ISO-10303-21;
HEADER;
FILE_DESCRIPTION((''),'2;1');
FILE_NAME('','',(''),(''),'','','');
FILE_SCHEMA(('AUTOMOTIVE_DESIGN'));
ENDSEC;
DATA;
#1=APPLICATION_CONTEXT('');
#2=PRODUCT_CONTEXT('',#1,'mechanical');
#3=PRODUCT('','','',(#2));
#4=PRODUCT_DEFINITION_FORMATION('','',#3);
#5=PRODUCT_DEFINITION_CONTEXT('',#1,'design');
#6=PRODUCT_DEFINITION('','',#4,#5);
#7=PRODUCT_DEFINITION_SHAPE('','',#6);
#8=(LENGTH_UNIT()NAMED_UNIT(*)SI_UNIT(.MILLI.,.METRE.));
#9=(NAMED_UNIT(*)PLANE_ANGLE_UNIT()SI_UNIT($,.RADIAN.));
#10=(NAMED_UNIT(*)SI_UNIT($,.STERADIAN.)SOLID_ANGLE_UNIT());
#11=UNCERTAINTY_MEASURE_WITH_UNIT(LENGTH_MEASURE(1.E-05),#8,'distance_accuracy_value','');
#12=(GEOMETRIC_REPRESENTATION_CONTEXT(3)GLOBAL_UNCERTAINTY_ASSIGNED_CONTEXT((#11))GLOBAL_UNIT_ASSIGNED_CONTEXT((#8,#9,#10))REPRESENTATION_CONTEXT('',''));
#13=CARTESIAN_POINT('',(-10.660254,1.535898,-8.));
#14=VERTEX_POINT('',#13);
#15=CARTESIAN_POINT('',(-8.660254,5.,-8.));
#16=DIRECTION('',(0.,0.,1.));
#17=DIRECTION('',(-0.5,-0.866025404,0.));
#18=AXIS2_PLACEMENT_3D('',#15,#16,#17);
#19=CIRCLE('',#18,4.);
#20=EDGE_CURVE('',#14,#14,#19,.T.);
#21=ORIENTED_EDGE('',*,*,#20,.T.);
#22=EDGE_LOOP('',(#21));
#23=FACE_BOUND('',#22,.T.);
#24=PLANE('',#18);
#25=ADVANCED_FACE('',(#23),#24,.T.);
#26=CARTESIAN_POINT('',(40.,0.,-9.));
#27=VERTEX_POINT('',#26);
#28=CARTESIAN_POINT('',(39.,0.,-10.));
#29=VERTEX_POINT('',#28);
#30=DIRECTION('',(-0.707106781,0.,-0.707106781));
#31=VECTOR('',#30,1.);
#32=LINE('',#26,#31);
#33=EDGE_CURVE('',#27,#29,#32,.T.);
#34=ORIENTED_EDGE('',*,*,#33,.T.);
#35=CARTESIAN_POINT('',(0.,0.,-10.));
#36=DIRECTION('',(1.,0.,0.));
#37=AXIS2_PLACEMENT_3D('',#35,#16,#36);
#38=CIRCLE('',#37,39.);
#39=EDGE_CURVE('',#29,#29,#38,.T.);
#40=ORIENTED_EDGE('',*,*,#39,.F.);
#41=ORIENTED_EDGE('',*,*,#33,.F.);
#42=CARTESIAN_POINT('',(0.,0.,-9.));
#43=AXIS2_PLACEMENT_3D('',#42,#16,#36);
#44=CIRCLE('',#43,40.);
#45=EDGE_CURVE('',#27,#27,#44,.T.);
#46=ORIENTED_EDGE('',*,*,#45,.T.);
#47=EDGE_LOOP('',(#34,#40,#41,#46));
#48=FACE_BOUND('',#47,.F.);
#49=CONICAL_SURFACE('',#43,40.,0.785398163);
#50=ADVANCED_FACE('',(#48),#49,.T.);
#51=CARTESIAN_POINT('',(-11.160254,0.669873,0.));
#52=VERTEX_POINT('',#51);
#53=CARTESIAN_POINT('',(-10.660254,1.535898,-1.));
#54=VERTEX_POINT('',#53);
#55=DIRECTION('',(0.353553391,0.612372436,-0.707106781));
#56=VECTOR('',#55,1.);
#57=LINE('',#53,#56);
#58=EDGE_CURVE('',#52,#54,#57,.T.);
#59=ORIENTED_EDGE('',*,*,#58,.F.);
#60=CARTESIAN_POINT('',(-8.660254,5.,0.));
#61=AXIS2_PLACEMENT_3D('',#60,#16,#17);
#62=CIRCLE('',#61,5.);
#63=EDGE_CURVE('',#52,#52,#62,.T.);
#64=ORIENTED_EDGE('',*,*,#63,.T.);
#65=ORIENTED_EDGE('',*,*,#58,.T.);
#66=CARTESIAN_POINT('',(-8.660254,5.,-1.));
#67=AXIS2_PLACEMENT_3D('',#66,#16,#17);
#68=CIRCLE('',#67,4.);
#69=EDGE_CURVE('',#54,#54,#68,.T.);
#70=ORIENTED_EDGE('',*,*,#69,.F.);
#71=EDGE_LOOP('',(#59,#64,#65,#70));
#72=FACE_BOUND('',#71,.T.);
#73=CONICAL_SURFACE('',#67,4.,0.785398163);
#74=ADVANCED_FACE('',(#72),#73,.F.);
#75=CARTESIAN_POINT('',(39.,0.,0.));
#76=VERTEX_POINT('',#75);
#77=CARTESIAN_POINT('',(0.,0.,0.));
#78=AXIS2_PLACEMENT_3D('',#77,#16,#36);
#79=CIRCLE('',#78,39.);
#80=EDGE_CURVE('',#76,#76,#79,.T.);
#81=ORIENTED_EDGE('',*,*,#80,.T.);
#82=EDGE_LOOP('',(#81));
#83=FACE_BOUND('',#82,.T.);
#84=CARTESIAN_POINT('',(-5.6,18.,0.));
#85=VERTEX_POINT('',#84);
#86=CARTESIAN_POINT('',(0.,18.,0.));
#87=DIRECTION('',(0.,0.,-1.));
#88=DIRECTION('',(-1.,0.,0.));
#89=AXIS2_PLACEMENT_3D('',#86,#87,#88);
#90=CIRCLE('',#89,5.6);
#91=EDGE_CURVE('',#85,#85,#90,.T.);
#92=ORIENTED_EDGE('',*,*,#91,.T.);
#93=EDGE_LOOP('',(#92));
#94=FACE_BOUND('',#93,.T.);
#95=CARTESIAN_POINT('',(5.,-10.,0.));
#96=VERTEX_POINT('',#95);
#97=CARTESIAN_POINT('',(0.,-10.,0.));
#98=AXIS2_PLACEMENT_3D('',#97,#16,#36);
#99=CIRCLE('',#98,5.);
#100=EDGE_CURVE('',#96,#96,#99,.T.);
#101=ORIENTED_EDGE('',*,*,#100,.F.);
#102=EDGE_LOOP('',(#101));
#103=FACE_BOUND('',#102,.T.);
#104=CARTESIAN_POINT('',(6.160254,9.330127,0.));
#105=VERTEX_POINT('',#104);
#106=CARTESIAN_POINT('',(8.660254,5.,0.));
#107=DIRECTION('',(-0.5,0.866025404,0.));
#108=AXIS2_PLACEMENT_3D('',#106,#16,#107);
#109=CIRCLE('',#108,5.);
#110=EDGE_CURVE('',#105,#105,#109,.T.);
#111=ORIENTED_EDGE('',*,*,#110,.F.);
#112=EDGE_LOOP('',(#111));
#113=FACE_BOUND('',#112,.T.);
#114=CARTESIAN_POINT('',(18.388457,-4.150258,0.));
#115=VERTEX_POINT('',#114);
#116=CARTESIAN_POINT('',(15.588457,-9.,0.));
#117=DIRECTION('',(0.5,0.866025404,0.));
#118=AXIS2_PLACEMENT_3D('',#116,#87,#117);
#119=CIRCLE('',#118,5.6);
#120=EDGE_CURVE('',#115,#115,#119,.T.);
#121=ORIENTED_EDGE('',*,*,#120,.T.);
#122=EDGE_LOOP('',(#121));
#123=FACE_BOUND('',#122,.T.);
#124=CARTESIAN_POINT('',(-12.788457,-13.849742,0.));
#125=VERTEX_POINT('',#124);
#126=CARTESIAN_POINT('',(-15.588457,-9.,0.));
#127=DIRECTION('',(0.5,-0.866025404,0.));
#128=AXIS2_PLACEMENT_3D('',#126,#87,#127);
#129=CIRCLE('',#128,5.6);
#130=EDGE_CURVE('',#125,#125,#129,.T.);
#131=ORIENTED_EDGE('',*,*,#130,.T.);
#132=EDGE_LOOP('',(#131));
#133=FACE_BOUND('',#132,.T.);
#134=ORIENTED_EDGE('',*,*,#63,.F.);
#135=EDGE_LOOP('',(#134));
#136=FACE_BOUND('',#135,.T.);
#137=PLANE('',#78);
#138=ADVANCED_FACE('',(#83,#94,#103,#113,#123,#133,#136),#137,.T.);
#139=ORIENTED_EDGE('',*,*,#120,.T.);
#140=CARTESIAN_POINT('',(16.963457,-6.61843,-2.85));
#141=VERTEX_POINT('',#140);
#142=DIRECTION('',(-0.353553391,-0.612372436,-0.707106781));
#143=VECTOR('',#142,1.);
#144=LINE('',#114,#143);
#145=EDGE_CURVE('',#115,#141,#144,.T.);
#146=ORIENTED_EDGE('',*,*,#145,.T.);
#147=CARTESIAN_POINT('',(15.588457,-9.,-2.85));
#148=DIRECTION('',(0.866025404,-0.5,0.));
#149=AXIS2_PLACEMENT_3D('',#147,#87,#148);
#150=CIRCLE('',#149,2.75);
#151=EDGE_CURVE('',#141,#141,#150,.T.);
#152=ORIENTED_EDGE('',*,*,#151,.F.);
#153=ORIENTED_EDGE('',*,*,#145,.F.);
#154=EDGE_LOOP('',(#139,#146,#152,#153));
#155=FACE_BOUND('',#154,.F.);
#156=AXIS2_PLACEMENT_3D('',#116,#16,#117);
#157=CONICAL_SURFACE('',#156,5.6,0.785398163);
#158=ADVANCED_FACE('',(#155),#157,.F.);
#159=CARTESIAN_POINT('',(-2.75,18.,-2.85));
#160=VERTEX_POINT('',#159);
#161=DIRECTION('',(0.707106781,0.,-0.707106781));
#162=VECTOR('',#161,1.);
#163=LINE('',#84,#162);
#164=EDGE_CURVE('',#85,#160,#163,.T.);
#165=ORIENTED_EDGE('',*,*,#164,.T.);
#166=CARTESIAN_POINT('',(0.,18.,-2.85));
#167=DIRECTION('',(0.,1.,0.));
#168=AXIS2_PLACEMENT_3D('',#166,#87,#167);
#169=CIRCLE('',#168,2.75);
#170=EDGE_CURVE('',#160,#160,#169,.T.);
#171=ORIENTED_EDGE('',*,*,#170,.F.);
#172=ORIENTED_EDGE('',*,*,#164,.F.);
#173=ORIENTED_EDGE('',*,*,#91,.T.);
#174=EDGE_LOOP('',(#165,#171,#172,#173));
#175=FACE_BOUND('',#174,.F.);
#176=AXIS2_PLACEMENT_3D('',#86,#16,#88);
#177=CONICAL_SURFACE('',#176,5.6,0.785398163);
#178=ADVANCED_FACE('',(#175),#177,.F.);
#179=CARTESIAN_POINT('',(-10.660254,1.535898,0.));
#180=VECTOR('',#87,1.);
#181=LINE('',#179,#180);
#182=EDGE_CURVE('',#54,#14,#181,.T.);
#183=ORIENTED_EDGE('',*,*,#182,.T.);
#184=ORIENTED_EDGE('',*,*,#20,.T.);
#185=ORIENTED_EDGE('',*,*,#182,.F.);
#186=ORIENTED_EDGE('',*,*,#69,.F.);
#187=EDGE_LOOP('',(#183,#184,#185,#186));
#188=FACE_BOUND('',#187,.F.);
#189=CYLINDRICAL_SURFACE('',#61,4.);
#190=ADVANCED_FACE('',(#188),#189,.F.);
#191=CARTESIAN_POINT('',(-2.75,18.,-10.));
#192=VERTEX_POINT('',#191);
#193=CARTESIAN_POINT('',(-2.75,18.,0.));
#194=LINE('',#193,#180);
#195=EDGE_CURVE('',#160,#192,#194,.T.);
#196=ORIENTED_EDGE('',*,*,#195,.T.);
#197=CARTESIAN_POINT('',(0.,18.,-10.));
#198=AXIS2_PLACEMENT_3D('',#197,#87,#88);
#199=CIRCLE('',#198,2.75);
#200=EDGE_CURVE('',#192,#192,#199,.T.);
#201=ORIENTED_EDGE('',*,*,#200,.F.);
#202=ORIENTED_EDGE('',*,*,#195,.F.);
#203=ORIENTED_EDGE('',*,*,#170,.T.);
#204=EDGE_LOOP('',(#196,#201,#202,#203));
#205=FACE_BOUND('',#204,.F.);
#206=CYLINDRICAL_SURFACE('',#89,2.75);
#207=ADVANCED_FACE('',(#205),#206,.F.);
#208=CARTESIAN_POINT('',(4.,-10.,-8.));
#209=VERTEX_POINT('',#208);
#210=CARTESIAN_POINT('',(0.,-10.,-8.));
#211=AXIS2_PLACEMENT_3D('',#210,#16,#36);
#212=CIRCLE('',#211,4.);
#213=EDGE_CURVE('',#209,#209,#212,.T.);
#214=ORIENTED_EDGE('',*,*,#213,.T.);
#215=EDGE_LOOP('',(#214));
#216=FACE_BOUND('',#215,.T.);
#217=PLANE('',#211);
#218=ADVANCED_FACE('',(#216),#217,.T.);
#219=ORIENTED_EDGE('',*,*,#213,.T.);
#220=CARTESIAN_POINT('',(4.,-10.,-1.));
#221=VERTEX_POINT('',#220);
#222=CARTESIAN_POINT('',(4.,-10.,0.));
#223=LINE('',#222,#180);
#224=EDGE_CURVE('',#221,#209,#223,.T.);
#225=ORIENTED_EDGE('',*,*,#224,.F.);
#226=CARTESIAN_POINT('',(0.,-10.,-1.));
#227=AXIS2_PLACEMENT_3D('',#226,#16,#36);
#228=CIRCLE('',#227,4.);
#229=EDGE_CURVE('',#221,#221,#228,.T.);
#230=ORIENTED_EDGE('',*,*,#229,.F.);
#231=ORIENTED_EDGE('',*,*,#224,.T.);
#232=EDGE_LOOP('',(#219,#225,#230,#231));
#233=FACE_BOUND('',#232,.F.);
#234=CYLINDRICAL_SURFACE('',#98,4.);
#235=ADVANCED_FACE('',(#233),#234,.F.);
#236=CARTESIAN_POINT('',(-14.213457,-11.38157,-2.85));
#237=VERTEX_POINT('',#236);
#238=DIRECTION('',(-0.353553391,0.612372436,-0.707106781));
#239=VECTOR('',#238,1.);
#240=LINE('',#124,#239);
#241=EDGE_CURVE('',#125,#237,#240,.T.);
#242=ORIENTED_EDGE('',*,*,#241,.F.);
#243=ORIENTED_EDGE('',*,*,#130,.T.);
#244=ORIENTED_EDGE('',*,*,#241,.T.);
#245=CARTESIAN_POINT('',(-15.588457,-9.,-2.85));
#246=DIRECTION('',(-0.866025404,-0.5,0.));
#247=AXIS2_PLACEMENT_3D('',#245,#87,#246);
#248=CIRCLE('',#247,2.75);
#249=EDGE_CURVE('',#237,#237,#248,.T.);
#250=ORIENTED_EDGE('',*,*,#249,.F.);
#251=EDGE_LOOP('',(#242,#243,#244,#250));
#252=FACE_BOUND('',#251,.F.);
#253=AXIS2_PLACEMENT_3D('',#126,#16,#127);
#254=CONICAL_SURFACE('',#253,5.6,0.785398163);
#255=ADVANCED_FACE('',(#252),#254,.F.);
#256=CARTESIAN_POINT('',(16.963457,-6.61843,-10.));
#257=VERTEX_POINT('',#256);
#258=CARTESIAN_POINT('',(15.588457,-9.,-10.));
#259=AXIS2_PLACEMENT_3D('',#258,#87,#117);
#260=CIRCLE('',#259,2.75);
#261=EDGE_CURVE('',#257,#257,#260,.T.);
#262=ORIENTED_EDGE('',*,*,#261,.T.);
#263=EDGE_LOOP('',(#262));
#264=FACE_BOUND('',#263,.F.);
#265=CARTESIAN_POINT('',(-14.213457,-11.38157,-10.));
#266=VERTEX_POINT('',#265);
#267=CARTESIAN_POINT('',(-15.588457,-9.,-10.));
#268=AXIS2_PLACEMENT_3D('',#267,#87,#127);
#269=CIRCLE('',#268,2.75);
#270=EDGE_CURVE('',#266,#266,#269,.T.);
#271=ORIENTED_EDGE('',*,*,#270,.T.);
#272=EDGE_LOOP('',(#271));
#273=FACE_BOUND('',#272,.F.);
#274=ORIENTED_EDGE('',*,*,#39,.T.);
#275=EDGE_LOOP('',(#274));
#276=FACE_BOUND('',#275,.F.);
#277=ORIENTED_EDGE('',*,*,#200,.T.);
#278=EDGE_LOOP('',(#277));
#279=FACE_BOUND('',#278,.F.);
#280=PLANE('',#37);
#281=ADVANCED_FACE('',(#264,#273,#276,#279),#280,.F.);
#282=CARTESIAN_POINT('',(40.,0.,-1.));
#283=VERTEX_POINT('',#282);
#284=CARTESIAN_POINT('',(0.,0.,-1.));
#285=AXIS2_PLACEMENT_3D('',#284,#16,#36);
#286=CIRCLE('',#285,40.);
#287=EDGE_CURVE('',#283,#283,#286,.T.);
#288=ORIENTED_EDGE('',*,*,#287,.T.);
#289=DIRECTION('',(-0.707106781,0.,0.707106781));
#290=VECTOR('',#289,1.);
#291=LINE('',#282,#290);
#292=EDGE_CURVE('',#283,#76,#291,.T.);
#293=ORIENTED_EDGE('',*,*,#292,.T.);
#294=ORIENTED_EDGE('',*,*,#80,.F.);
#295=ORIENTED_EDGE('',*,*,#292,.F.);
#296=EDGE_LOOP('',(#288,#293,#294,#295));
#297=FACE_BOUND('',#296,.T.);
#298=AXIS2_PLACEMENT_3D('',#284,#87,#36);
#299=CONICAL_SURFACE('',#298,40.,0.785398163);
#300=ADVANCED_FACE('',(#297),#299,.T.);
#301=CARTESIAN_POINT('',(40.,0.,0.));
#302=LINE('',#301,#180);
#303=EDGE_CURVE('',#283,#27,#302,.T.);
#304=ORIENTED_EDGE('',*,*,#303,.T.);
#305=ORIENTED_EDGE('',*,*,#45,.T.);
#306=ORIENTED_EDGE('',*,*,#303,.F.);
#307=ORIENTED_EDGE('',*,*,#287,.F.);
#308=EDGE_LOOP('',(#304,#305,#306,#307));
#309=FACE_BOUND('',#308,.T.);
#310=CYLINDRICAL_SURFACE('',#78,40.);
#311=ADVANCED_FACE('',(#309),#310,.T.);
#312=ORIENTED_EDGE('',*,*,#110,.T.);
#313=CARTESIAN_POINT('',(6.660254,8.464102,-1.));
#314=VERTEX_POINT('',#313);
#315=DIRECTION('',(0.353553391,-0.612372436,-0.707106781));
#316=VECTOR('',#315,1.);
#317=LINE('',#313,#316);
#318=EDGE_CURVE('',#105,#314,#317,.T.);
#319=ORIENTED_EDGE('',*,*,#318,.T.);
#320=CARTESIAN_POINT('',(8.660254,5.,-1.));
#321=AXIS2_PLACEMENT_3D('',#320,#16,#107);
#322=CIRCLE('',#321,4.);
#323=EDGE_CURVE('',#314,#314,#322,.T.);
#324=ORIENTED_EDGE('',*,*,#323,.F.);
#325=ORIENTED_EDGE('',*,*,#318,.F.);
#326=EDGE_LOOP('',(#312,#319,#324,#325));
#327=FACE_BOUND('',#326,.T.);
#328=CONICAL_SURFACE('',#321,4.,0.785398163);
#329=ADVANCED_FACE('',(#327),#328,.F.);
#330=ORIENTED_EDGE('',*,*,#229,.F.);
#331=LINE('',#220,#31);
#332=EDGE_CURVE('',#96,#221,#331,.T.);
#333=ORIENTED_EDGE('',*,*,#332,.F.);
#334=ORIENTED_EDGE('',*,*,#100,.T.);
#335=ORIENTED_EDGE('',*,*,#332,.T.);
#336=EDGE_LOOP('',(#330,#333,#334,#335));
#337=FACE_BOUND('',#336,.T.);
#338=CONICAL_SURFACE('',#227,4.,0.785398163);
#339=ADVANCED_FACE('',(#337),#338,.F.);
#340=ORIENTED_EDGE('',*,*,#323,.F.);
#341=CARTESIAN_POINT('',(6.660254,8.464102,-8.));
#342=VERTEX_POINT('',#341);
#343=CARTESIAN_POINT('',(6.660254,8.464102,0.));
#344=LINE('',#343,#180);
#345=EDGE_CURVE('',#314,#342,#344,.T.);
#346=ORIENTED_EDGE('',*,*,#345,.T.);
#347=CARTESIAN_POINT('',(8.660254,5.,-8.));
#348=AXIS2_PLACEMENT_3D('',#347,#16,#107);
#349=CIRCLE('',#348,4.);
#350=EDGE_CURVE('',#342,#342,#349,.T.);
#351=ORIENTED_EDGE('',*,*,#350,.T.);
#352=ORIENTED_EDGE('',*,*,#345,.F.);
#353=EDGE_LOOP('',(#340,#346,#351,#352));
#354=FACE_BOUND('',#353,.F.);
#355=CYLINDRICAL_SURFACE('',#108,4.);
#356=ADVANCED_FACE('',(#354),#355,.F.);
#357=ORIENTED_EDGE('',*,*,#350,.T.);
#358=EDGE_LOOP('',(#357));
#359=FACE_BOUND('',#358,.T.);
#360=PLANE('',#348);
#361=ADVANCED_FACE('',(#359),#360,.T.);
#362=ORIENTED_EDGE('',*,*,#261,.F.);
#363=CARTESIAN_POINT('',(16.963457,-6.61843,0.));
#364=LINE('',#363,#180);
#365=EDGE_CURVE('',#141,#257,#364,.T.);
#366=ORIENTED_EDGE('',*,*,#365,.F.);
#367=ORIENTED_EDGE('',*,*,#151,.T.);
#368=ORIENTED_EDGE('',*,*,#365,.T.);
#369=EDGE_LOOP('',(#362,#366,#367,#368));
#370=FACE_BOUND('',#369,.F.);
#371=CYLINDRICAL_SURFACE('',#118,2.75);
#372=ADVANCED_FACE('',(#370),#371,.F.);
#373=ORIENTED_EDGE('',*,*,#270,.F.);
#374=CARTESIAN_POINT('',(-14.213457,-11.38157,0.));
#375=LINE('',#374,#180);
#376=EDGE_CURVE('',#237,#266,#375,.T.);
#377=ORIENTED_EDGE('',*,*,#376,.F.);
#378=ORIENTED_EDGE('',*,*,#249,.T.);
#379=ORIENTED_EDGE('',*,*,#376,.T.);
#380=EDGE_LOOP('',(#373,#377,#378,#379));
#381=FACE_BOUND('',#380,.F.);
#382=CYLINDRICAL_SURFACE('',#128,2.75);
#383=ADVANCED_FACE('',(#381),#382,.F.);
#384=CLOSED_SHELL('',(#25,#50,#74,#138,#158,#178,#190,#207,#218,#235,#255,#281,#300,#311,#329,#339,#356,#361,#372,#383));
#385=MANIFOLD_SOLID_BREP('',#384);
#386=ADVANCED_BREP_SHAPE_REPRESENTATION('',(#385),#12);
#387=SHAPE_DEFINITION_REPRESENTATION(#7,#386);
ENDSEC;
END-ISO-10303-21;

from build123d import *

# Parameters (mm, degrees)
F0_R            = 40
F2_DEPTH        = 10
F3_D            = 5.5
F3_CSINK_D      = 11.2
F3_CSINK_ANGLE  = 90
F3_COPIES_COUNT = 3
F4_R            = 4
F5_DEPTH        = 8
F5_COPIES_COUNT = 3
F6_SIZE         = 1


# Not quite as in the source:
# - a pattern or mirror of a feature is missing from the dataset's text; its kind, count and spacing are read off the source's solid
# - a feature names something its author has since deleted; it is built from what else it names


with BuildPart() as f2:
    # F0 (on Top) → F2 (new body)
    with BuildSketch(Plane.XY):
        Circle(F0_R)
    extrude(amount=-F2_DEPTH)

    # F3 (through all)
    with Locations(Plane.XY):
        with Locations((0, 18)):
            f3 = CounterSinkHole(F3_D / 2, F3_CSINK_D / 2, counter_sink_angle=F3_CSINK_ANGLE)

    # F3_copies: F3 ×3 about axis
    f3_copies_axis = Axis((0, 0, 0), (0, 0, 1))
    for i in range(1, F3_COPIES_COUNT):
        add(f3.rotate(f3_copies_axis, i * 360 / F3_COPIES_COUNT), mode=Mode.SUBTRACT)

    # F4 (on face) → F5 (cut)
    with BuildSketch(Plane.XY):
        with Locations((0, -10)):
            Circle(F4_R)
    f5 = extrude(amount=-F5_DEPTH, mode=Mode.SUBTRACT)

    # F5_copies: F5 ×3 about axis
    f5_copies_axis = Axis((0, 0, 0), (0, 0, 1))
    for i in range(1, F5_COPIES_COUNT):
        add(f5.rotate(f5_copies_axis, i * 360 / F5_COPIES_COUNT), mode=Mode.SUBTRACT)

    # F6
    f6_edges = [f2.edges().sort_by_distance(p)[0] for p in [
        (-40, 0, -10),
        (-40, 0, 0),
        (-4, -10, 0),
        (-6.660254, 8.464102, 0),
        (10.660254, 1.535898, 0),
    ]]
    chamfer(f6_edges, length=F6_SIZE)


solid = f2.part
